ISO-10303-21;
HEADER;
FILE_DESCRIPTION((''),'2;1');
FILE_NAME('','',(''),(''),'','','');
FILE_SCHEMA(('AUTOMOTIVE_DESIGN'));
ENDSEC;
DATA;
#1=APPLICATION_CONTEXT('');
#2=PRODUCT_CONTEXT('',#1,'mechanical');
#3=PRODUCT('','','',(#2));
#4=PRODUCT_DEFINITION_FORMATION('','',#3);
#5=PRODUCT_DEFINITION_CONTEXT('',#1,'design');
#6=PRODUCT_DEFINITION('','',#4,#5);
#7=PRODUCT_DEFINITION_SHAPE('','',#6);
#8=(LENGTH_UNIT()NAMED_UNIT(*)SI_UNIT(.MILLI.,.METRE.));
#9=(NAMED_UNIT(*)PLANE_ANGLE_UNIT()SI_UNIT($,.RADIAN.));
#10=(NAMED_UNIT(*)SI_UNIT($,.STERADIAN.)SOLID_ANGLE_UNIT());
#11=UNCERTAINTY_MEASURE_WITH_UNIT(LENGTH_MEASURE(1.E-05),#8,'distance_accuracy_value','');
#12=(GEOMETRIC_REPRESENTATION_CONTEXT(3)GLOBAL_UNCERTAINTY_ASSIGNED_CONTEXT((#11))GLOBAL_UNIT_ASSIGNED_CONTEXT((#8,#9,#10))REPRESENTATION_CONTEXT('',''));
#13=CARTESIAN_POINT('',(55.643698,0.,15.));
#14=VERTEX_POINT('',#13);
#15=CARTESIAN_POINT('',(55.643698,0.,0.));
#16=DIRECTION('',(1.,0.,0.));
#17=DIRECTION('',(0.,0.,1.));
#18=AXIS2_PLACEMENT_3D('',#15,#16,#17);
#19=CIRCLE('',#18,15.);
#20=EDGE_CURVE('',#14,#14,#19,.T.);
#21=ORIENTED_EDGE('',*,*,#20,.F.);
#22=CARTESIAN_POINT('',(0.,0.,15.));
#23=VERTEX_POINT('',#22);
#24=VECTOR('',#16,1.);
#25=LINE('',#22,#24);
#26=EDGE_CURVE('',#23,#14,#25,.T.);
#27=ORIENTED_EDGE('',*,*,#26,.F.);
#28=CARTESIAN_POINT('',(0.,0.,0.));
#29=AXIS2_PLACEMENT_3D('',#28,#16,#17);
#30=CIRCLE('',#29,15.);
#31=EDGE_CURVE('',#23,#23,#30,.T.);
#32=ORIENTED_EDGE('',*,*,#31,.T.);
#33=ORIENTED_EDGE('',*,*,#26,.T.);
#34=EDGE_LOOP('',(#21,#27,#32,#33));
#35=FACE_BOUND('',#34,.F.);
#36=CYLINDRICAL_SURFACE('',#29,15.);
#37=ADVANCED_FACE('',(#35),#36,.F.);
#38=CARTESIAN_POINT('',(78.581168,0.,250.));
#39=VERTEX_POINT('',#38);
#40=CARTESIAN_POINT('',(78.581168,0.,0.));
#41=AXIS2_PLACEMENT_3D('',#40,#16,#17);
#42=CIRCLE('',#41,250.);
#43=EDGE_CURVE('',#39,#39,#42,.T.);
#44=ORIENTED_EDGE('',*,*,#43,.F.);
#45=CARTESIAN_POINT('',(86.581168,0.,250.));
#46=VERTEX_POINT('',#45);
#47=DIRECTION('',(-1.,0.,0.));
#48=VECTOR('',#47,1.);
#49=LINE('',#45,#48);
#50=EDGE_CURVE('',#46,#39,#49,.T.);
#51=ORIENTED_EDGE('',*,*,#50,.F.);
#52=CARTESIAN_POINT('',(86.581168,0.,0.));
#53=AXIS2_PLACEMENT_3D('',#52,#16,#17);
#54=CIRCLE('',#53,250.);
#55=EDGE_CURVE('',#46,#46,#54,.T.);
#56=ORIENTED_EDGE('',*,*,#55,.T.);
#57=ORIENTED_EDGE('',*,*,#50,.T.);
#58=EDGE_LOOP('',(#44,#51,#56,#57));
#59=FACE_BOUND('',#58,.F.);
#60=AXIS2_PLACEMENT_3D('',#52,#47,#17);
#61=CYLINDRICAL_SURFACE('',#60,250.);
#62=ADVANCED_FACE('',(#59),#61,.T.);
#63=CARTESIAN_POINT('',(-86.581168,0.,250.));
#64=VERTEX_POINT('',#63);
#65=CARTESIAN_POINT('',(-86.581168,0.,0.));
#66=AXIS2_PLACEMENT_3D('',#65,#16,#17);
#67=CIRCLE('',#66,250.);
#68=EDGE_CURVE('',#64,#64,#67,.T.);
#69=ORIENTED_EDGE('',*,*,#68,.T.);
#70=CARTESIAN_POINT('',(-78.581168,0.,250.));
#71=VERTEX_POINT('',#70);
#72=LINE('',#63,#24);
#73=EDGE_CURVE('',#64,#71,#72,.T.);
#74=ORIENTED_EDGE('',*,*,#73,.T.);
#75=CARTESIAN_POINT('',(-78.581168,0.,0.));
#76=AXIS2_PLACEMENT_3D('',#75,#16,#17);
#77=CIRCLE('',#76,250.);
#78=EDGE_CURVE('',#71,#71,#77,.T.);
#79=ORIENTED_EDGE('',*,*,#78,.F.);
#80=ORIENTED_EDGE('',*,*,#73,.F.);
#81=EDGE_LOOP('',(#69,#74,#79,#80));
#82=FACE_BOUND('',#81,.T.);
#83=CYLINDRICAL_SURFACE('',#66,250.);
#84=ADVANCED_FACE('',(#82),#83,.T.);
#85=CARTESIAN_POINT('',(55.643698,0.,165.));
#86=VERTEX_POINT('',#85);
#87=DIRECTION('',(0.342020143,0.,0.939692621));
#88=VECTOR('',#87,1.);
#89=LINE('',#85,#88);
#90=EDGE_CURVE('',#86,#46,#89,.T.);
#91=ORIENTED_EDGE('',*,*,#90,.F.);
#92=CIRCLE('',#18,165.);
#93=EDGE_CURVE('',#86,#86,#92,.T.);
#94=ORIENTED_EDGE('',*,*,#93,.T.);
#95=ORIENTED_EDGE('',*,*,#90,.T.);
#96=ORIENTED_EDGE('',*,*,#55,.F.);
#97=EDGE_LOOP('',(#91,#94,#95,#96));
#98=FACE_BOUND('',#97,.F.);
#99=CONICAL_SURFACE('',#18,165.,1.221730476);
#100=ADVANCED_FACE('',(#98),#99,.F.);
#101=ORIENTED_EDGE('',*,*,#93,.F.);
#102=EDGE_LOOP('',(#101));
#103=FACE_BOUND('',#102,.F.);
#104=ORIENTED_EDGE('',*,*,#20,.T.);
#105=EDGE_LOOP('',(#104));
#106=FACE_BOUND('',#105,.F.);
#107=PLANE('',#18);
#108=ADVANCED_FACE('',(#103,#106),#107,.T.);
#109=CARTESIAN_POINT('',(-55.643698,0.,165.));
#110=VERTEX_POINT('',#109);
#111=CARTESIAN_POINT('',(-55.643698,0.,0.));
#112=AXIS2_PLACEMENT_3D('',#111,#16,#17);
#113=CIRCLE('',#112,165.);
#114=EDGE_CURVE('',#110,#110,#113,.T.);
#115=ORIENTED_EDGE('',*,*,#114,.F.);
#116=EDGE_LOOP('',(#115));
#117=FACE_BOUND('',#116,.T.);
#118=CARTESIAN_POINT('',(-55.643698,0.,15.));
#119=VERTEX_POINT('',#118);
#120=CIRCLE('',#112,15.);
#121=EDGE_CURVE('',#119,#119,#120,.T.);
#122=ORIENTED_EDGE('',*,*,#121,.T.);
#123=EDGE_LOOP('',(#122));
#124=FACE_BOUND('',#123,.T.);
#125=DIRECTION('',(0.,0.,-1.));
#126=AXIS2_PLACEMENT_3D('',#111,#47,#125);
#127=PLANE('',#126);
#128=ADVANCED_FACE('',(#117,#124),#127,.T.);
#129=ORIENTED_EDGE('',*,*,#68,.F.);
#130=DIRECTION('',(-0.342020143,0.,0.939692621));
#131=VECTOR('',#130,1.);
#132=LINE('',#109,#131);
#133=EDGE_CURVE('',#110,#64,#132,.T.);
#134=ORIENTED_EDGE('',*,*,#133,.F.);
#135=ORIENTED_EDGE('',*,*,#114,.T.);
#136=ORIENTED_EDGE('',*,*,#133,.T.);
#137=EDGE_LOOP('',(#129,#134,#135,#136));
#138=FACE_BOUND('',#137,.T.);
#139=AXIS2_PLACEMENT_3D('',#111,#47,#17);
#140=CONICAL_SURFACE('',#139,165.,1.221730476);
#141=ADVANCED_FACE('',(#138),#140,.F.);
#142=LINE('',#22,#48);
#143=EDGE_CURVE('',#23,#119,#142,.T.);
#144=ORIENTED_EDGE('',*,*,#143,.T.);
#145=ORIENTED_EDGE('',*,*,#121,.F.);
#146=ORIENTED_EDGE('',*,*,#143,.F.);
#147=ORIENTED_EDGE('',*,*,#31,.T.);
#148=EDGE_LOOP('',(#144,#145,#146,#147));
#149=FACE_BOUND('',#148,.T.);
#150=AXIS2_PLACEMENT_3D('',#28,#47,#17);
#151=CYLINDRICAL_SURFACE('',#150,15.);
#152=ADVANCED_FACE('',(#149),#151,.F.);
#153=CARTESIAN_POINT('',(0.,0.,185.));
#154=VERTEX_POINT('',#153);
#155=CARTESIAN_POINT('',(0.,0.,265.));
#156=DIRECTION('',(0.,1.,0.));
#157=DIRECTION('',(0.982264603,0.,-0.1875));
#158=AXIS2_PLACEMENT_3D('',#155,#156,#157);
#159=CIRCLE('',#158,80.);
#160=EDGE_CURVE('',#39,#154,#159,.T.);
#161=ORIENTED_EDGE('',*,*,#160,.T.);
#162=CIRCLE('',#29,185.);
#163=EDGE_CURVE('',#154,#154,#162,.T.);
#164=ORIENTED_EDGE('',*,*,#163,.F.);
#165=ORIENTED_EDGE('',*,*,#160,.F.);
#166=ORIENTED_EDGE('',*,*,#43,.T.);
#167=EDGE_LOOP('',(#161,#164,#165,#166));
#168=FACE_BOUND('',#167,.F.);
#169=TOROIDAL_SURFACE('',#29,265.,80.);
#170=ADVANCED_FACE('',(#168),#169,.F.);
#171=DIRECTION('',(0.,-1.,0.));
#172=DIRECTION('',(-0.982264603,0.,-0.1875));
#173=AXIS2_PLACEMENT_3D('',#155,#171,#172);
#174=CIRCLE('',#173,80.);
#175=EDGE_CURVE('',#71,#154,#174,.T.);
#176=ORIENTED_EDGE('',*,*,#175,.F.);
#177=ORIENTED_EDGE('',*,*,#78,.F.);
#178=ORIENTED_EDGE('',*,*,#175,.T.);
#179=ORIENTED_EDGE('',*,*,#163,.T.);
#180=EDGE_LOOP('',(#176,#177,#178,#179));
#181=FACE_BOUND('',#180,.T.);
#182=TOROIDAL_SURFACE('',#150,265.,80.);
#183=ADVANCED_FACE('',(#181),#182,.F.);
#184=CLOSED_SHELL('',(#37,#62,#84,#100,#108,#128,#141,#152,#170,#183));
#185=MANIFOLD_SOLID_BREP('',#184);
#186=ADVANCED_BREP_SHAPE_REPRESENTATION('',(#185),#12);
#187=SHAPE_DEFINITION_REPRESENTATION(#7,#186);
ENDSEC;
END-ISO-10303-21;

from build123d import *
from build123d import SkipClean  # not in build123d's __all__


with BuildPart() as f1:
    # F0 (on Front) → F1 (revolve)
    with BuildSketch(Plane.XZ):
        with BuildLine():
            Line((0, 15), (55.6436983149, 15))
            Line((55.6436983149, 15), (55.6436983149, 165))
            Line((55.6436983149, 165), (86.5811682275, 250))
            Line((86.5811682275, 250), (78.5811682275, 250))
            ThreePointArc((78.5811682275, 250), (50.9901951359, 203.3558599703), (0, 185))
            Line((0, 185), (0, 15))
        make_face()
    revolve(axis=Axis((-5.425222218, 0, 0), (1, 0, 0)))

    # F2: F1 across plane


with BuildPart() as f1_1:
    add(f1.part, clean=False)
    with SkipClean():  # cleaning this boolean's faces spoils the solid; the shape is the same uncleaned
        add(f1.part.mirror(Plane.YZ), clean=False)


solid = f1_1.part
